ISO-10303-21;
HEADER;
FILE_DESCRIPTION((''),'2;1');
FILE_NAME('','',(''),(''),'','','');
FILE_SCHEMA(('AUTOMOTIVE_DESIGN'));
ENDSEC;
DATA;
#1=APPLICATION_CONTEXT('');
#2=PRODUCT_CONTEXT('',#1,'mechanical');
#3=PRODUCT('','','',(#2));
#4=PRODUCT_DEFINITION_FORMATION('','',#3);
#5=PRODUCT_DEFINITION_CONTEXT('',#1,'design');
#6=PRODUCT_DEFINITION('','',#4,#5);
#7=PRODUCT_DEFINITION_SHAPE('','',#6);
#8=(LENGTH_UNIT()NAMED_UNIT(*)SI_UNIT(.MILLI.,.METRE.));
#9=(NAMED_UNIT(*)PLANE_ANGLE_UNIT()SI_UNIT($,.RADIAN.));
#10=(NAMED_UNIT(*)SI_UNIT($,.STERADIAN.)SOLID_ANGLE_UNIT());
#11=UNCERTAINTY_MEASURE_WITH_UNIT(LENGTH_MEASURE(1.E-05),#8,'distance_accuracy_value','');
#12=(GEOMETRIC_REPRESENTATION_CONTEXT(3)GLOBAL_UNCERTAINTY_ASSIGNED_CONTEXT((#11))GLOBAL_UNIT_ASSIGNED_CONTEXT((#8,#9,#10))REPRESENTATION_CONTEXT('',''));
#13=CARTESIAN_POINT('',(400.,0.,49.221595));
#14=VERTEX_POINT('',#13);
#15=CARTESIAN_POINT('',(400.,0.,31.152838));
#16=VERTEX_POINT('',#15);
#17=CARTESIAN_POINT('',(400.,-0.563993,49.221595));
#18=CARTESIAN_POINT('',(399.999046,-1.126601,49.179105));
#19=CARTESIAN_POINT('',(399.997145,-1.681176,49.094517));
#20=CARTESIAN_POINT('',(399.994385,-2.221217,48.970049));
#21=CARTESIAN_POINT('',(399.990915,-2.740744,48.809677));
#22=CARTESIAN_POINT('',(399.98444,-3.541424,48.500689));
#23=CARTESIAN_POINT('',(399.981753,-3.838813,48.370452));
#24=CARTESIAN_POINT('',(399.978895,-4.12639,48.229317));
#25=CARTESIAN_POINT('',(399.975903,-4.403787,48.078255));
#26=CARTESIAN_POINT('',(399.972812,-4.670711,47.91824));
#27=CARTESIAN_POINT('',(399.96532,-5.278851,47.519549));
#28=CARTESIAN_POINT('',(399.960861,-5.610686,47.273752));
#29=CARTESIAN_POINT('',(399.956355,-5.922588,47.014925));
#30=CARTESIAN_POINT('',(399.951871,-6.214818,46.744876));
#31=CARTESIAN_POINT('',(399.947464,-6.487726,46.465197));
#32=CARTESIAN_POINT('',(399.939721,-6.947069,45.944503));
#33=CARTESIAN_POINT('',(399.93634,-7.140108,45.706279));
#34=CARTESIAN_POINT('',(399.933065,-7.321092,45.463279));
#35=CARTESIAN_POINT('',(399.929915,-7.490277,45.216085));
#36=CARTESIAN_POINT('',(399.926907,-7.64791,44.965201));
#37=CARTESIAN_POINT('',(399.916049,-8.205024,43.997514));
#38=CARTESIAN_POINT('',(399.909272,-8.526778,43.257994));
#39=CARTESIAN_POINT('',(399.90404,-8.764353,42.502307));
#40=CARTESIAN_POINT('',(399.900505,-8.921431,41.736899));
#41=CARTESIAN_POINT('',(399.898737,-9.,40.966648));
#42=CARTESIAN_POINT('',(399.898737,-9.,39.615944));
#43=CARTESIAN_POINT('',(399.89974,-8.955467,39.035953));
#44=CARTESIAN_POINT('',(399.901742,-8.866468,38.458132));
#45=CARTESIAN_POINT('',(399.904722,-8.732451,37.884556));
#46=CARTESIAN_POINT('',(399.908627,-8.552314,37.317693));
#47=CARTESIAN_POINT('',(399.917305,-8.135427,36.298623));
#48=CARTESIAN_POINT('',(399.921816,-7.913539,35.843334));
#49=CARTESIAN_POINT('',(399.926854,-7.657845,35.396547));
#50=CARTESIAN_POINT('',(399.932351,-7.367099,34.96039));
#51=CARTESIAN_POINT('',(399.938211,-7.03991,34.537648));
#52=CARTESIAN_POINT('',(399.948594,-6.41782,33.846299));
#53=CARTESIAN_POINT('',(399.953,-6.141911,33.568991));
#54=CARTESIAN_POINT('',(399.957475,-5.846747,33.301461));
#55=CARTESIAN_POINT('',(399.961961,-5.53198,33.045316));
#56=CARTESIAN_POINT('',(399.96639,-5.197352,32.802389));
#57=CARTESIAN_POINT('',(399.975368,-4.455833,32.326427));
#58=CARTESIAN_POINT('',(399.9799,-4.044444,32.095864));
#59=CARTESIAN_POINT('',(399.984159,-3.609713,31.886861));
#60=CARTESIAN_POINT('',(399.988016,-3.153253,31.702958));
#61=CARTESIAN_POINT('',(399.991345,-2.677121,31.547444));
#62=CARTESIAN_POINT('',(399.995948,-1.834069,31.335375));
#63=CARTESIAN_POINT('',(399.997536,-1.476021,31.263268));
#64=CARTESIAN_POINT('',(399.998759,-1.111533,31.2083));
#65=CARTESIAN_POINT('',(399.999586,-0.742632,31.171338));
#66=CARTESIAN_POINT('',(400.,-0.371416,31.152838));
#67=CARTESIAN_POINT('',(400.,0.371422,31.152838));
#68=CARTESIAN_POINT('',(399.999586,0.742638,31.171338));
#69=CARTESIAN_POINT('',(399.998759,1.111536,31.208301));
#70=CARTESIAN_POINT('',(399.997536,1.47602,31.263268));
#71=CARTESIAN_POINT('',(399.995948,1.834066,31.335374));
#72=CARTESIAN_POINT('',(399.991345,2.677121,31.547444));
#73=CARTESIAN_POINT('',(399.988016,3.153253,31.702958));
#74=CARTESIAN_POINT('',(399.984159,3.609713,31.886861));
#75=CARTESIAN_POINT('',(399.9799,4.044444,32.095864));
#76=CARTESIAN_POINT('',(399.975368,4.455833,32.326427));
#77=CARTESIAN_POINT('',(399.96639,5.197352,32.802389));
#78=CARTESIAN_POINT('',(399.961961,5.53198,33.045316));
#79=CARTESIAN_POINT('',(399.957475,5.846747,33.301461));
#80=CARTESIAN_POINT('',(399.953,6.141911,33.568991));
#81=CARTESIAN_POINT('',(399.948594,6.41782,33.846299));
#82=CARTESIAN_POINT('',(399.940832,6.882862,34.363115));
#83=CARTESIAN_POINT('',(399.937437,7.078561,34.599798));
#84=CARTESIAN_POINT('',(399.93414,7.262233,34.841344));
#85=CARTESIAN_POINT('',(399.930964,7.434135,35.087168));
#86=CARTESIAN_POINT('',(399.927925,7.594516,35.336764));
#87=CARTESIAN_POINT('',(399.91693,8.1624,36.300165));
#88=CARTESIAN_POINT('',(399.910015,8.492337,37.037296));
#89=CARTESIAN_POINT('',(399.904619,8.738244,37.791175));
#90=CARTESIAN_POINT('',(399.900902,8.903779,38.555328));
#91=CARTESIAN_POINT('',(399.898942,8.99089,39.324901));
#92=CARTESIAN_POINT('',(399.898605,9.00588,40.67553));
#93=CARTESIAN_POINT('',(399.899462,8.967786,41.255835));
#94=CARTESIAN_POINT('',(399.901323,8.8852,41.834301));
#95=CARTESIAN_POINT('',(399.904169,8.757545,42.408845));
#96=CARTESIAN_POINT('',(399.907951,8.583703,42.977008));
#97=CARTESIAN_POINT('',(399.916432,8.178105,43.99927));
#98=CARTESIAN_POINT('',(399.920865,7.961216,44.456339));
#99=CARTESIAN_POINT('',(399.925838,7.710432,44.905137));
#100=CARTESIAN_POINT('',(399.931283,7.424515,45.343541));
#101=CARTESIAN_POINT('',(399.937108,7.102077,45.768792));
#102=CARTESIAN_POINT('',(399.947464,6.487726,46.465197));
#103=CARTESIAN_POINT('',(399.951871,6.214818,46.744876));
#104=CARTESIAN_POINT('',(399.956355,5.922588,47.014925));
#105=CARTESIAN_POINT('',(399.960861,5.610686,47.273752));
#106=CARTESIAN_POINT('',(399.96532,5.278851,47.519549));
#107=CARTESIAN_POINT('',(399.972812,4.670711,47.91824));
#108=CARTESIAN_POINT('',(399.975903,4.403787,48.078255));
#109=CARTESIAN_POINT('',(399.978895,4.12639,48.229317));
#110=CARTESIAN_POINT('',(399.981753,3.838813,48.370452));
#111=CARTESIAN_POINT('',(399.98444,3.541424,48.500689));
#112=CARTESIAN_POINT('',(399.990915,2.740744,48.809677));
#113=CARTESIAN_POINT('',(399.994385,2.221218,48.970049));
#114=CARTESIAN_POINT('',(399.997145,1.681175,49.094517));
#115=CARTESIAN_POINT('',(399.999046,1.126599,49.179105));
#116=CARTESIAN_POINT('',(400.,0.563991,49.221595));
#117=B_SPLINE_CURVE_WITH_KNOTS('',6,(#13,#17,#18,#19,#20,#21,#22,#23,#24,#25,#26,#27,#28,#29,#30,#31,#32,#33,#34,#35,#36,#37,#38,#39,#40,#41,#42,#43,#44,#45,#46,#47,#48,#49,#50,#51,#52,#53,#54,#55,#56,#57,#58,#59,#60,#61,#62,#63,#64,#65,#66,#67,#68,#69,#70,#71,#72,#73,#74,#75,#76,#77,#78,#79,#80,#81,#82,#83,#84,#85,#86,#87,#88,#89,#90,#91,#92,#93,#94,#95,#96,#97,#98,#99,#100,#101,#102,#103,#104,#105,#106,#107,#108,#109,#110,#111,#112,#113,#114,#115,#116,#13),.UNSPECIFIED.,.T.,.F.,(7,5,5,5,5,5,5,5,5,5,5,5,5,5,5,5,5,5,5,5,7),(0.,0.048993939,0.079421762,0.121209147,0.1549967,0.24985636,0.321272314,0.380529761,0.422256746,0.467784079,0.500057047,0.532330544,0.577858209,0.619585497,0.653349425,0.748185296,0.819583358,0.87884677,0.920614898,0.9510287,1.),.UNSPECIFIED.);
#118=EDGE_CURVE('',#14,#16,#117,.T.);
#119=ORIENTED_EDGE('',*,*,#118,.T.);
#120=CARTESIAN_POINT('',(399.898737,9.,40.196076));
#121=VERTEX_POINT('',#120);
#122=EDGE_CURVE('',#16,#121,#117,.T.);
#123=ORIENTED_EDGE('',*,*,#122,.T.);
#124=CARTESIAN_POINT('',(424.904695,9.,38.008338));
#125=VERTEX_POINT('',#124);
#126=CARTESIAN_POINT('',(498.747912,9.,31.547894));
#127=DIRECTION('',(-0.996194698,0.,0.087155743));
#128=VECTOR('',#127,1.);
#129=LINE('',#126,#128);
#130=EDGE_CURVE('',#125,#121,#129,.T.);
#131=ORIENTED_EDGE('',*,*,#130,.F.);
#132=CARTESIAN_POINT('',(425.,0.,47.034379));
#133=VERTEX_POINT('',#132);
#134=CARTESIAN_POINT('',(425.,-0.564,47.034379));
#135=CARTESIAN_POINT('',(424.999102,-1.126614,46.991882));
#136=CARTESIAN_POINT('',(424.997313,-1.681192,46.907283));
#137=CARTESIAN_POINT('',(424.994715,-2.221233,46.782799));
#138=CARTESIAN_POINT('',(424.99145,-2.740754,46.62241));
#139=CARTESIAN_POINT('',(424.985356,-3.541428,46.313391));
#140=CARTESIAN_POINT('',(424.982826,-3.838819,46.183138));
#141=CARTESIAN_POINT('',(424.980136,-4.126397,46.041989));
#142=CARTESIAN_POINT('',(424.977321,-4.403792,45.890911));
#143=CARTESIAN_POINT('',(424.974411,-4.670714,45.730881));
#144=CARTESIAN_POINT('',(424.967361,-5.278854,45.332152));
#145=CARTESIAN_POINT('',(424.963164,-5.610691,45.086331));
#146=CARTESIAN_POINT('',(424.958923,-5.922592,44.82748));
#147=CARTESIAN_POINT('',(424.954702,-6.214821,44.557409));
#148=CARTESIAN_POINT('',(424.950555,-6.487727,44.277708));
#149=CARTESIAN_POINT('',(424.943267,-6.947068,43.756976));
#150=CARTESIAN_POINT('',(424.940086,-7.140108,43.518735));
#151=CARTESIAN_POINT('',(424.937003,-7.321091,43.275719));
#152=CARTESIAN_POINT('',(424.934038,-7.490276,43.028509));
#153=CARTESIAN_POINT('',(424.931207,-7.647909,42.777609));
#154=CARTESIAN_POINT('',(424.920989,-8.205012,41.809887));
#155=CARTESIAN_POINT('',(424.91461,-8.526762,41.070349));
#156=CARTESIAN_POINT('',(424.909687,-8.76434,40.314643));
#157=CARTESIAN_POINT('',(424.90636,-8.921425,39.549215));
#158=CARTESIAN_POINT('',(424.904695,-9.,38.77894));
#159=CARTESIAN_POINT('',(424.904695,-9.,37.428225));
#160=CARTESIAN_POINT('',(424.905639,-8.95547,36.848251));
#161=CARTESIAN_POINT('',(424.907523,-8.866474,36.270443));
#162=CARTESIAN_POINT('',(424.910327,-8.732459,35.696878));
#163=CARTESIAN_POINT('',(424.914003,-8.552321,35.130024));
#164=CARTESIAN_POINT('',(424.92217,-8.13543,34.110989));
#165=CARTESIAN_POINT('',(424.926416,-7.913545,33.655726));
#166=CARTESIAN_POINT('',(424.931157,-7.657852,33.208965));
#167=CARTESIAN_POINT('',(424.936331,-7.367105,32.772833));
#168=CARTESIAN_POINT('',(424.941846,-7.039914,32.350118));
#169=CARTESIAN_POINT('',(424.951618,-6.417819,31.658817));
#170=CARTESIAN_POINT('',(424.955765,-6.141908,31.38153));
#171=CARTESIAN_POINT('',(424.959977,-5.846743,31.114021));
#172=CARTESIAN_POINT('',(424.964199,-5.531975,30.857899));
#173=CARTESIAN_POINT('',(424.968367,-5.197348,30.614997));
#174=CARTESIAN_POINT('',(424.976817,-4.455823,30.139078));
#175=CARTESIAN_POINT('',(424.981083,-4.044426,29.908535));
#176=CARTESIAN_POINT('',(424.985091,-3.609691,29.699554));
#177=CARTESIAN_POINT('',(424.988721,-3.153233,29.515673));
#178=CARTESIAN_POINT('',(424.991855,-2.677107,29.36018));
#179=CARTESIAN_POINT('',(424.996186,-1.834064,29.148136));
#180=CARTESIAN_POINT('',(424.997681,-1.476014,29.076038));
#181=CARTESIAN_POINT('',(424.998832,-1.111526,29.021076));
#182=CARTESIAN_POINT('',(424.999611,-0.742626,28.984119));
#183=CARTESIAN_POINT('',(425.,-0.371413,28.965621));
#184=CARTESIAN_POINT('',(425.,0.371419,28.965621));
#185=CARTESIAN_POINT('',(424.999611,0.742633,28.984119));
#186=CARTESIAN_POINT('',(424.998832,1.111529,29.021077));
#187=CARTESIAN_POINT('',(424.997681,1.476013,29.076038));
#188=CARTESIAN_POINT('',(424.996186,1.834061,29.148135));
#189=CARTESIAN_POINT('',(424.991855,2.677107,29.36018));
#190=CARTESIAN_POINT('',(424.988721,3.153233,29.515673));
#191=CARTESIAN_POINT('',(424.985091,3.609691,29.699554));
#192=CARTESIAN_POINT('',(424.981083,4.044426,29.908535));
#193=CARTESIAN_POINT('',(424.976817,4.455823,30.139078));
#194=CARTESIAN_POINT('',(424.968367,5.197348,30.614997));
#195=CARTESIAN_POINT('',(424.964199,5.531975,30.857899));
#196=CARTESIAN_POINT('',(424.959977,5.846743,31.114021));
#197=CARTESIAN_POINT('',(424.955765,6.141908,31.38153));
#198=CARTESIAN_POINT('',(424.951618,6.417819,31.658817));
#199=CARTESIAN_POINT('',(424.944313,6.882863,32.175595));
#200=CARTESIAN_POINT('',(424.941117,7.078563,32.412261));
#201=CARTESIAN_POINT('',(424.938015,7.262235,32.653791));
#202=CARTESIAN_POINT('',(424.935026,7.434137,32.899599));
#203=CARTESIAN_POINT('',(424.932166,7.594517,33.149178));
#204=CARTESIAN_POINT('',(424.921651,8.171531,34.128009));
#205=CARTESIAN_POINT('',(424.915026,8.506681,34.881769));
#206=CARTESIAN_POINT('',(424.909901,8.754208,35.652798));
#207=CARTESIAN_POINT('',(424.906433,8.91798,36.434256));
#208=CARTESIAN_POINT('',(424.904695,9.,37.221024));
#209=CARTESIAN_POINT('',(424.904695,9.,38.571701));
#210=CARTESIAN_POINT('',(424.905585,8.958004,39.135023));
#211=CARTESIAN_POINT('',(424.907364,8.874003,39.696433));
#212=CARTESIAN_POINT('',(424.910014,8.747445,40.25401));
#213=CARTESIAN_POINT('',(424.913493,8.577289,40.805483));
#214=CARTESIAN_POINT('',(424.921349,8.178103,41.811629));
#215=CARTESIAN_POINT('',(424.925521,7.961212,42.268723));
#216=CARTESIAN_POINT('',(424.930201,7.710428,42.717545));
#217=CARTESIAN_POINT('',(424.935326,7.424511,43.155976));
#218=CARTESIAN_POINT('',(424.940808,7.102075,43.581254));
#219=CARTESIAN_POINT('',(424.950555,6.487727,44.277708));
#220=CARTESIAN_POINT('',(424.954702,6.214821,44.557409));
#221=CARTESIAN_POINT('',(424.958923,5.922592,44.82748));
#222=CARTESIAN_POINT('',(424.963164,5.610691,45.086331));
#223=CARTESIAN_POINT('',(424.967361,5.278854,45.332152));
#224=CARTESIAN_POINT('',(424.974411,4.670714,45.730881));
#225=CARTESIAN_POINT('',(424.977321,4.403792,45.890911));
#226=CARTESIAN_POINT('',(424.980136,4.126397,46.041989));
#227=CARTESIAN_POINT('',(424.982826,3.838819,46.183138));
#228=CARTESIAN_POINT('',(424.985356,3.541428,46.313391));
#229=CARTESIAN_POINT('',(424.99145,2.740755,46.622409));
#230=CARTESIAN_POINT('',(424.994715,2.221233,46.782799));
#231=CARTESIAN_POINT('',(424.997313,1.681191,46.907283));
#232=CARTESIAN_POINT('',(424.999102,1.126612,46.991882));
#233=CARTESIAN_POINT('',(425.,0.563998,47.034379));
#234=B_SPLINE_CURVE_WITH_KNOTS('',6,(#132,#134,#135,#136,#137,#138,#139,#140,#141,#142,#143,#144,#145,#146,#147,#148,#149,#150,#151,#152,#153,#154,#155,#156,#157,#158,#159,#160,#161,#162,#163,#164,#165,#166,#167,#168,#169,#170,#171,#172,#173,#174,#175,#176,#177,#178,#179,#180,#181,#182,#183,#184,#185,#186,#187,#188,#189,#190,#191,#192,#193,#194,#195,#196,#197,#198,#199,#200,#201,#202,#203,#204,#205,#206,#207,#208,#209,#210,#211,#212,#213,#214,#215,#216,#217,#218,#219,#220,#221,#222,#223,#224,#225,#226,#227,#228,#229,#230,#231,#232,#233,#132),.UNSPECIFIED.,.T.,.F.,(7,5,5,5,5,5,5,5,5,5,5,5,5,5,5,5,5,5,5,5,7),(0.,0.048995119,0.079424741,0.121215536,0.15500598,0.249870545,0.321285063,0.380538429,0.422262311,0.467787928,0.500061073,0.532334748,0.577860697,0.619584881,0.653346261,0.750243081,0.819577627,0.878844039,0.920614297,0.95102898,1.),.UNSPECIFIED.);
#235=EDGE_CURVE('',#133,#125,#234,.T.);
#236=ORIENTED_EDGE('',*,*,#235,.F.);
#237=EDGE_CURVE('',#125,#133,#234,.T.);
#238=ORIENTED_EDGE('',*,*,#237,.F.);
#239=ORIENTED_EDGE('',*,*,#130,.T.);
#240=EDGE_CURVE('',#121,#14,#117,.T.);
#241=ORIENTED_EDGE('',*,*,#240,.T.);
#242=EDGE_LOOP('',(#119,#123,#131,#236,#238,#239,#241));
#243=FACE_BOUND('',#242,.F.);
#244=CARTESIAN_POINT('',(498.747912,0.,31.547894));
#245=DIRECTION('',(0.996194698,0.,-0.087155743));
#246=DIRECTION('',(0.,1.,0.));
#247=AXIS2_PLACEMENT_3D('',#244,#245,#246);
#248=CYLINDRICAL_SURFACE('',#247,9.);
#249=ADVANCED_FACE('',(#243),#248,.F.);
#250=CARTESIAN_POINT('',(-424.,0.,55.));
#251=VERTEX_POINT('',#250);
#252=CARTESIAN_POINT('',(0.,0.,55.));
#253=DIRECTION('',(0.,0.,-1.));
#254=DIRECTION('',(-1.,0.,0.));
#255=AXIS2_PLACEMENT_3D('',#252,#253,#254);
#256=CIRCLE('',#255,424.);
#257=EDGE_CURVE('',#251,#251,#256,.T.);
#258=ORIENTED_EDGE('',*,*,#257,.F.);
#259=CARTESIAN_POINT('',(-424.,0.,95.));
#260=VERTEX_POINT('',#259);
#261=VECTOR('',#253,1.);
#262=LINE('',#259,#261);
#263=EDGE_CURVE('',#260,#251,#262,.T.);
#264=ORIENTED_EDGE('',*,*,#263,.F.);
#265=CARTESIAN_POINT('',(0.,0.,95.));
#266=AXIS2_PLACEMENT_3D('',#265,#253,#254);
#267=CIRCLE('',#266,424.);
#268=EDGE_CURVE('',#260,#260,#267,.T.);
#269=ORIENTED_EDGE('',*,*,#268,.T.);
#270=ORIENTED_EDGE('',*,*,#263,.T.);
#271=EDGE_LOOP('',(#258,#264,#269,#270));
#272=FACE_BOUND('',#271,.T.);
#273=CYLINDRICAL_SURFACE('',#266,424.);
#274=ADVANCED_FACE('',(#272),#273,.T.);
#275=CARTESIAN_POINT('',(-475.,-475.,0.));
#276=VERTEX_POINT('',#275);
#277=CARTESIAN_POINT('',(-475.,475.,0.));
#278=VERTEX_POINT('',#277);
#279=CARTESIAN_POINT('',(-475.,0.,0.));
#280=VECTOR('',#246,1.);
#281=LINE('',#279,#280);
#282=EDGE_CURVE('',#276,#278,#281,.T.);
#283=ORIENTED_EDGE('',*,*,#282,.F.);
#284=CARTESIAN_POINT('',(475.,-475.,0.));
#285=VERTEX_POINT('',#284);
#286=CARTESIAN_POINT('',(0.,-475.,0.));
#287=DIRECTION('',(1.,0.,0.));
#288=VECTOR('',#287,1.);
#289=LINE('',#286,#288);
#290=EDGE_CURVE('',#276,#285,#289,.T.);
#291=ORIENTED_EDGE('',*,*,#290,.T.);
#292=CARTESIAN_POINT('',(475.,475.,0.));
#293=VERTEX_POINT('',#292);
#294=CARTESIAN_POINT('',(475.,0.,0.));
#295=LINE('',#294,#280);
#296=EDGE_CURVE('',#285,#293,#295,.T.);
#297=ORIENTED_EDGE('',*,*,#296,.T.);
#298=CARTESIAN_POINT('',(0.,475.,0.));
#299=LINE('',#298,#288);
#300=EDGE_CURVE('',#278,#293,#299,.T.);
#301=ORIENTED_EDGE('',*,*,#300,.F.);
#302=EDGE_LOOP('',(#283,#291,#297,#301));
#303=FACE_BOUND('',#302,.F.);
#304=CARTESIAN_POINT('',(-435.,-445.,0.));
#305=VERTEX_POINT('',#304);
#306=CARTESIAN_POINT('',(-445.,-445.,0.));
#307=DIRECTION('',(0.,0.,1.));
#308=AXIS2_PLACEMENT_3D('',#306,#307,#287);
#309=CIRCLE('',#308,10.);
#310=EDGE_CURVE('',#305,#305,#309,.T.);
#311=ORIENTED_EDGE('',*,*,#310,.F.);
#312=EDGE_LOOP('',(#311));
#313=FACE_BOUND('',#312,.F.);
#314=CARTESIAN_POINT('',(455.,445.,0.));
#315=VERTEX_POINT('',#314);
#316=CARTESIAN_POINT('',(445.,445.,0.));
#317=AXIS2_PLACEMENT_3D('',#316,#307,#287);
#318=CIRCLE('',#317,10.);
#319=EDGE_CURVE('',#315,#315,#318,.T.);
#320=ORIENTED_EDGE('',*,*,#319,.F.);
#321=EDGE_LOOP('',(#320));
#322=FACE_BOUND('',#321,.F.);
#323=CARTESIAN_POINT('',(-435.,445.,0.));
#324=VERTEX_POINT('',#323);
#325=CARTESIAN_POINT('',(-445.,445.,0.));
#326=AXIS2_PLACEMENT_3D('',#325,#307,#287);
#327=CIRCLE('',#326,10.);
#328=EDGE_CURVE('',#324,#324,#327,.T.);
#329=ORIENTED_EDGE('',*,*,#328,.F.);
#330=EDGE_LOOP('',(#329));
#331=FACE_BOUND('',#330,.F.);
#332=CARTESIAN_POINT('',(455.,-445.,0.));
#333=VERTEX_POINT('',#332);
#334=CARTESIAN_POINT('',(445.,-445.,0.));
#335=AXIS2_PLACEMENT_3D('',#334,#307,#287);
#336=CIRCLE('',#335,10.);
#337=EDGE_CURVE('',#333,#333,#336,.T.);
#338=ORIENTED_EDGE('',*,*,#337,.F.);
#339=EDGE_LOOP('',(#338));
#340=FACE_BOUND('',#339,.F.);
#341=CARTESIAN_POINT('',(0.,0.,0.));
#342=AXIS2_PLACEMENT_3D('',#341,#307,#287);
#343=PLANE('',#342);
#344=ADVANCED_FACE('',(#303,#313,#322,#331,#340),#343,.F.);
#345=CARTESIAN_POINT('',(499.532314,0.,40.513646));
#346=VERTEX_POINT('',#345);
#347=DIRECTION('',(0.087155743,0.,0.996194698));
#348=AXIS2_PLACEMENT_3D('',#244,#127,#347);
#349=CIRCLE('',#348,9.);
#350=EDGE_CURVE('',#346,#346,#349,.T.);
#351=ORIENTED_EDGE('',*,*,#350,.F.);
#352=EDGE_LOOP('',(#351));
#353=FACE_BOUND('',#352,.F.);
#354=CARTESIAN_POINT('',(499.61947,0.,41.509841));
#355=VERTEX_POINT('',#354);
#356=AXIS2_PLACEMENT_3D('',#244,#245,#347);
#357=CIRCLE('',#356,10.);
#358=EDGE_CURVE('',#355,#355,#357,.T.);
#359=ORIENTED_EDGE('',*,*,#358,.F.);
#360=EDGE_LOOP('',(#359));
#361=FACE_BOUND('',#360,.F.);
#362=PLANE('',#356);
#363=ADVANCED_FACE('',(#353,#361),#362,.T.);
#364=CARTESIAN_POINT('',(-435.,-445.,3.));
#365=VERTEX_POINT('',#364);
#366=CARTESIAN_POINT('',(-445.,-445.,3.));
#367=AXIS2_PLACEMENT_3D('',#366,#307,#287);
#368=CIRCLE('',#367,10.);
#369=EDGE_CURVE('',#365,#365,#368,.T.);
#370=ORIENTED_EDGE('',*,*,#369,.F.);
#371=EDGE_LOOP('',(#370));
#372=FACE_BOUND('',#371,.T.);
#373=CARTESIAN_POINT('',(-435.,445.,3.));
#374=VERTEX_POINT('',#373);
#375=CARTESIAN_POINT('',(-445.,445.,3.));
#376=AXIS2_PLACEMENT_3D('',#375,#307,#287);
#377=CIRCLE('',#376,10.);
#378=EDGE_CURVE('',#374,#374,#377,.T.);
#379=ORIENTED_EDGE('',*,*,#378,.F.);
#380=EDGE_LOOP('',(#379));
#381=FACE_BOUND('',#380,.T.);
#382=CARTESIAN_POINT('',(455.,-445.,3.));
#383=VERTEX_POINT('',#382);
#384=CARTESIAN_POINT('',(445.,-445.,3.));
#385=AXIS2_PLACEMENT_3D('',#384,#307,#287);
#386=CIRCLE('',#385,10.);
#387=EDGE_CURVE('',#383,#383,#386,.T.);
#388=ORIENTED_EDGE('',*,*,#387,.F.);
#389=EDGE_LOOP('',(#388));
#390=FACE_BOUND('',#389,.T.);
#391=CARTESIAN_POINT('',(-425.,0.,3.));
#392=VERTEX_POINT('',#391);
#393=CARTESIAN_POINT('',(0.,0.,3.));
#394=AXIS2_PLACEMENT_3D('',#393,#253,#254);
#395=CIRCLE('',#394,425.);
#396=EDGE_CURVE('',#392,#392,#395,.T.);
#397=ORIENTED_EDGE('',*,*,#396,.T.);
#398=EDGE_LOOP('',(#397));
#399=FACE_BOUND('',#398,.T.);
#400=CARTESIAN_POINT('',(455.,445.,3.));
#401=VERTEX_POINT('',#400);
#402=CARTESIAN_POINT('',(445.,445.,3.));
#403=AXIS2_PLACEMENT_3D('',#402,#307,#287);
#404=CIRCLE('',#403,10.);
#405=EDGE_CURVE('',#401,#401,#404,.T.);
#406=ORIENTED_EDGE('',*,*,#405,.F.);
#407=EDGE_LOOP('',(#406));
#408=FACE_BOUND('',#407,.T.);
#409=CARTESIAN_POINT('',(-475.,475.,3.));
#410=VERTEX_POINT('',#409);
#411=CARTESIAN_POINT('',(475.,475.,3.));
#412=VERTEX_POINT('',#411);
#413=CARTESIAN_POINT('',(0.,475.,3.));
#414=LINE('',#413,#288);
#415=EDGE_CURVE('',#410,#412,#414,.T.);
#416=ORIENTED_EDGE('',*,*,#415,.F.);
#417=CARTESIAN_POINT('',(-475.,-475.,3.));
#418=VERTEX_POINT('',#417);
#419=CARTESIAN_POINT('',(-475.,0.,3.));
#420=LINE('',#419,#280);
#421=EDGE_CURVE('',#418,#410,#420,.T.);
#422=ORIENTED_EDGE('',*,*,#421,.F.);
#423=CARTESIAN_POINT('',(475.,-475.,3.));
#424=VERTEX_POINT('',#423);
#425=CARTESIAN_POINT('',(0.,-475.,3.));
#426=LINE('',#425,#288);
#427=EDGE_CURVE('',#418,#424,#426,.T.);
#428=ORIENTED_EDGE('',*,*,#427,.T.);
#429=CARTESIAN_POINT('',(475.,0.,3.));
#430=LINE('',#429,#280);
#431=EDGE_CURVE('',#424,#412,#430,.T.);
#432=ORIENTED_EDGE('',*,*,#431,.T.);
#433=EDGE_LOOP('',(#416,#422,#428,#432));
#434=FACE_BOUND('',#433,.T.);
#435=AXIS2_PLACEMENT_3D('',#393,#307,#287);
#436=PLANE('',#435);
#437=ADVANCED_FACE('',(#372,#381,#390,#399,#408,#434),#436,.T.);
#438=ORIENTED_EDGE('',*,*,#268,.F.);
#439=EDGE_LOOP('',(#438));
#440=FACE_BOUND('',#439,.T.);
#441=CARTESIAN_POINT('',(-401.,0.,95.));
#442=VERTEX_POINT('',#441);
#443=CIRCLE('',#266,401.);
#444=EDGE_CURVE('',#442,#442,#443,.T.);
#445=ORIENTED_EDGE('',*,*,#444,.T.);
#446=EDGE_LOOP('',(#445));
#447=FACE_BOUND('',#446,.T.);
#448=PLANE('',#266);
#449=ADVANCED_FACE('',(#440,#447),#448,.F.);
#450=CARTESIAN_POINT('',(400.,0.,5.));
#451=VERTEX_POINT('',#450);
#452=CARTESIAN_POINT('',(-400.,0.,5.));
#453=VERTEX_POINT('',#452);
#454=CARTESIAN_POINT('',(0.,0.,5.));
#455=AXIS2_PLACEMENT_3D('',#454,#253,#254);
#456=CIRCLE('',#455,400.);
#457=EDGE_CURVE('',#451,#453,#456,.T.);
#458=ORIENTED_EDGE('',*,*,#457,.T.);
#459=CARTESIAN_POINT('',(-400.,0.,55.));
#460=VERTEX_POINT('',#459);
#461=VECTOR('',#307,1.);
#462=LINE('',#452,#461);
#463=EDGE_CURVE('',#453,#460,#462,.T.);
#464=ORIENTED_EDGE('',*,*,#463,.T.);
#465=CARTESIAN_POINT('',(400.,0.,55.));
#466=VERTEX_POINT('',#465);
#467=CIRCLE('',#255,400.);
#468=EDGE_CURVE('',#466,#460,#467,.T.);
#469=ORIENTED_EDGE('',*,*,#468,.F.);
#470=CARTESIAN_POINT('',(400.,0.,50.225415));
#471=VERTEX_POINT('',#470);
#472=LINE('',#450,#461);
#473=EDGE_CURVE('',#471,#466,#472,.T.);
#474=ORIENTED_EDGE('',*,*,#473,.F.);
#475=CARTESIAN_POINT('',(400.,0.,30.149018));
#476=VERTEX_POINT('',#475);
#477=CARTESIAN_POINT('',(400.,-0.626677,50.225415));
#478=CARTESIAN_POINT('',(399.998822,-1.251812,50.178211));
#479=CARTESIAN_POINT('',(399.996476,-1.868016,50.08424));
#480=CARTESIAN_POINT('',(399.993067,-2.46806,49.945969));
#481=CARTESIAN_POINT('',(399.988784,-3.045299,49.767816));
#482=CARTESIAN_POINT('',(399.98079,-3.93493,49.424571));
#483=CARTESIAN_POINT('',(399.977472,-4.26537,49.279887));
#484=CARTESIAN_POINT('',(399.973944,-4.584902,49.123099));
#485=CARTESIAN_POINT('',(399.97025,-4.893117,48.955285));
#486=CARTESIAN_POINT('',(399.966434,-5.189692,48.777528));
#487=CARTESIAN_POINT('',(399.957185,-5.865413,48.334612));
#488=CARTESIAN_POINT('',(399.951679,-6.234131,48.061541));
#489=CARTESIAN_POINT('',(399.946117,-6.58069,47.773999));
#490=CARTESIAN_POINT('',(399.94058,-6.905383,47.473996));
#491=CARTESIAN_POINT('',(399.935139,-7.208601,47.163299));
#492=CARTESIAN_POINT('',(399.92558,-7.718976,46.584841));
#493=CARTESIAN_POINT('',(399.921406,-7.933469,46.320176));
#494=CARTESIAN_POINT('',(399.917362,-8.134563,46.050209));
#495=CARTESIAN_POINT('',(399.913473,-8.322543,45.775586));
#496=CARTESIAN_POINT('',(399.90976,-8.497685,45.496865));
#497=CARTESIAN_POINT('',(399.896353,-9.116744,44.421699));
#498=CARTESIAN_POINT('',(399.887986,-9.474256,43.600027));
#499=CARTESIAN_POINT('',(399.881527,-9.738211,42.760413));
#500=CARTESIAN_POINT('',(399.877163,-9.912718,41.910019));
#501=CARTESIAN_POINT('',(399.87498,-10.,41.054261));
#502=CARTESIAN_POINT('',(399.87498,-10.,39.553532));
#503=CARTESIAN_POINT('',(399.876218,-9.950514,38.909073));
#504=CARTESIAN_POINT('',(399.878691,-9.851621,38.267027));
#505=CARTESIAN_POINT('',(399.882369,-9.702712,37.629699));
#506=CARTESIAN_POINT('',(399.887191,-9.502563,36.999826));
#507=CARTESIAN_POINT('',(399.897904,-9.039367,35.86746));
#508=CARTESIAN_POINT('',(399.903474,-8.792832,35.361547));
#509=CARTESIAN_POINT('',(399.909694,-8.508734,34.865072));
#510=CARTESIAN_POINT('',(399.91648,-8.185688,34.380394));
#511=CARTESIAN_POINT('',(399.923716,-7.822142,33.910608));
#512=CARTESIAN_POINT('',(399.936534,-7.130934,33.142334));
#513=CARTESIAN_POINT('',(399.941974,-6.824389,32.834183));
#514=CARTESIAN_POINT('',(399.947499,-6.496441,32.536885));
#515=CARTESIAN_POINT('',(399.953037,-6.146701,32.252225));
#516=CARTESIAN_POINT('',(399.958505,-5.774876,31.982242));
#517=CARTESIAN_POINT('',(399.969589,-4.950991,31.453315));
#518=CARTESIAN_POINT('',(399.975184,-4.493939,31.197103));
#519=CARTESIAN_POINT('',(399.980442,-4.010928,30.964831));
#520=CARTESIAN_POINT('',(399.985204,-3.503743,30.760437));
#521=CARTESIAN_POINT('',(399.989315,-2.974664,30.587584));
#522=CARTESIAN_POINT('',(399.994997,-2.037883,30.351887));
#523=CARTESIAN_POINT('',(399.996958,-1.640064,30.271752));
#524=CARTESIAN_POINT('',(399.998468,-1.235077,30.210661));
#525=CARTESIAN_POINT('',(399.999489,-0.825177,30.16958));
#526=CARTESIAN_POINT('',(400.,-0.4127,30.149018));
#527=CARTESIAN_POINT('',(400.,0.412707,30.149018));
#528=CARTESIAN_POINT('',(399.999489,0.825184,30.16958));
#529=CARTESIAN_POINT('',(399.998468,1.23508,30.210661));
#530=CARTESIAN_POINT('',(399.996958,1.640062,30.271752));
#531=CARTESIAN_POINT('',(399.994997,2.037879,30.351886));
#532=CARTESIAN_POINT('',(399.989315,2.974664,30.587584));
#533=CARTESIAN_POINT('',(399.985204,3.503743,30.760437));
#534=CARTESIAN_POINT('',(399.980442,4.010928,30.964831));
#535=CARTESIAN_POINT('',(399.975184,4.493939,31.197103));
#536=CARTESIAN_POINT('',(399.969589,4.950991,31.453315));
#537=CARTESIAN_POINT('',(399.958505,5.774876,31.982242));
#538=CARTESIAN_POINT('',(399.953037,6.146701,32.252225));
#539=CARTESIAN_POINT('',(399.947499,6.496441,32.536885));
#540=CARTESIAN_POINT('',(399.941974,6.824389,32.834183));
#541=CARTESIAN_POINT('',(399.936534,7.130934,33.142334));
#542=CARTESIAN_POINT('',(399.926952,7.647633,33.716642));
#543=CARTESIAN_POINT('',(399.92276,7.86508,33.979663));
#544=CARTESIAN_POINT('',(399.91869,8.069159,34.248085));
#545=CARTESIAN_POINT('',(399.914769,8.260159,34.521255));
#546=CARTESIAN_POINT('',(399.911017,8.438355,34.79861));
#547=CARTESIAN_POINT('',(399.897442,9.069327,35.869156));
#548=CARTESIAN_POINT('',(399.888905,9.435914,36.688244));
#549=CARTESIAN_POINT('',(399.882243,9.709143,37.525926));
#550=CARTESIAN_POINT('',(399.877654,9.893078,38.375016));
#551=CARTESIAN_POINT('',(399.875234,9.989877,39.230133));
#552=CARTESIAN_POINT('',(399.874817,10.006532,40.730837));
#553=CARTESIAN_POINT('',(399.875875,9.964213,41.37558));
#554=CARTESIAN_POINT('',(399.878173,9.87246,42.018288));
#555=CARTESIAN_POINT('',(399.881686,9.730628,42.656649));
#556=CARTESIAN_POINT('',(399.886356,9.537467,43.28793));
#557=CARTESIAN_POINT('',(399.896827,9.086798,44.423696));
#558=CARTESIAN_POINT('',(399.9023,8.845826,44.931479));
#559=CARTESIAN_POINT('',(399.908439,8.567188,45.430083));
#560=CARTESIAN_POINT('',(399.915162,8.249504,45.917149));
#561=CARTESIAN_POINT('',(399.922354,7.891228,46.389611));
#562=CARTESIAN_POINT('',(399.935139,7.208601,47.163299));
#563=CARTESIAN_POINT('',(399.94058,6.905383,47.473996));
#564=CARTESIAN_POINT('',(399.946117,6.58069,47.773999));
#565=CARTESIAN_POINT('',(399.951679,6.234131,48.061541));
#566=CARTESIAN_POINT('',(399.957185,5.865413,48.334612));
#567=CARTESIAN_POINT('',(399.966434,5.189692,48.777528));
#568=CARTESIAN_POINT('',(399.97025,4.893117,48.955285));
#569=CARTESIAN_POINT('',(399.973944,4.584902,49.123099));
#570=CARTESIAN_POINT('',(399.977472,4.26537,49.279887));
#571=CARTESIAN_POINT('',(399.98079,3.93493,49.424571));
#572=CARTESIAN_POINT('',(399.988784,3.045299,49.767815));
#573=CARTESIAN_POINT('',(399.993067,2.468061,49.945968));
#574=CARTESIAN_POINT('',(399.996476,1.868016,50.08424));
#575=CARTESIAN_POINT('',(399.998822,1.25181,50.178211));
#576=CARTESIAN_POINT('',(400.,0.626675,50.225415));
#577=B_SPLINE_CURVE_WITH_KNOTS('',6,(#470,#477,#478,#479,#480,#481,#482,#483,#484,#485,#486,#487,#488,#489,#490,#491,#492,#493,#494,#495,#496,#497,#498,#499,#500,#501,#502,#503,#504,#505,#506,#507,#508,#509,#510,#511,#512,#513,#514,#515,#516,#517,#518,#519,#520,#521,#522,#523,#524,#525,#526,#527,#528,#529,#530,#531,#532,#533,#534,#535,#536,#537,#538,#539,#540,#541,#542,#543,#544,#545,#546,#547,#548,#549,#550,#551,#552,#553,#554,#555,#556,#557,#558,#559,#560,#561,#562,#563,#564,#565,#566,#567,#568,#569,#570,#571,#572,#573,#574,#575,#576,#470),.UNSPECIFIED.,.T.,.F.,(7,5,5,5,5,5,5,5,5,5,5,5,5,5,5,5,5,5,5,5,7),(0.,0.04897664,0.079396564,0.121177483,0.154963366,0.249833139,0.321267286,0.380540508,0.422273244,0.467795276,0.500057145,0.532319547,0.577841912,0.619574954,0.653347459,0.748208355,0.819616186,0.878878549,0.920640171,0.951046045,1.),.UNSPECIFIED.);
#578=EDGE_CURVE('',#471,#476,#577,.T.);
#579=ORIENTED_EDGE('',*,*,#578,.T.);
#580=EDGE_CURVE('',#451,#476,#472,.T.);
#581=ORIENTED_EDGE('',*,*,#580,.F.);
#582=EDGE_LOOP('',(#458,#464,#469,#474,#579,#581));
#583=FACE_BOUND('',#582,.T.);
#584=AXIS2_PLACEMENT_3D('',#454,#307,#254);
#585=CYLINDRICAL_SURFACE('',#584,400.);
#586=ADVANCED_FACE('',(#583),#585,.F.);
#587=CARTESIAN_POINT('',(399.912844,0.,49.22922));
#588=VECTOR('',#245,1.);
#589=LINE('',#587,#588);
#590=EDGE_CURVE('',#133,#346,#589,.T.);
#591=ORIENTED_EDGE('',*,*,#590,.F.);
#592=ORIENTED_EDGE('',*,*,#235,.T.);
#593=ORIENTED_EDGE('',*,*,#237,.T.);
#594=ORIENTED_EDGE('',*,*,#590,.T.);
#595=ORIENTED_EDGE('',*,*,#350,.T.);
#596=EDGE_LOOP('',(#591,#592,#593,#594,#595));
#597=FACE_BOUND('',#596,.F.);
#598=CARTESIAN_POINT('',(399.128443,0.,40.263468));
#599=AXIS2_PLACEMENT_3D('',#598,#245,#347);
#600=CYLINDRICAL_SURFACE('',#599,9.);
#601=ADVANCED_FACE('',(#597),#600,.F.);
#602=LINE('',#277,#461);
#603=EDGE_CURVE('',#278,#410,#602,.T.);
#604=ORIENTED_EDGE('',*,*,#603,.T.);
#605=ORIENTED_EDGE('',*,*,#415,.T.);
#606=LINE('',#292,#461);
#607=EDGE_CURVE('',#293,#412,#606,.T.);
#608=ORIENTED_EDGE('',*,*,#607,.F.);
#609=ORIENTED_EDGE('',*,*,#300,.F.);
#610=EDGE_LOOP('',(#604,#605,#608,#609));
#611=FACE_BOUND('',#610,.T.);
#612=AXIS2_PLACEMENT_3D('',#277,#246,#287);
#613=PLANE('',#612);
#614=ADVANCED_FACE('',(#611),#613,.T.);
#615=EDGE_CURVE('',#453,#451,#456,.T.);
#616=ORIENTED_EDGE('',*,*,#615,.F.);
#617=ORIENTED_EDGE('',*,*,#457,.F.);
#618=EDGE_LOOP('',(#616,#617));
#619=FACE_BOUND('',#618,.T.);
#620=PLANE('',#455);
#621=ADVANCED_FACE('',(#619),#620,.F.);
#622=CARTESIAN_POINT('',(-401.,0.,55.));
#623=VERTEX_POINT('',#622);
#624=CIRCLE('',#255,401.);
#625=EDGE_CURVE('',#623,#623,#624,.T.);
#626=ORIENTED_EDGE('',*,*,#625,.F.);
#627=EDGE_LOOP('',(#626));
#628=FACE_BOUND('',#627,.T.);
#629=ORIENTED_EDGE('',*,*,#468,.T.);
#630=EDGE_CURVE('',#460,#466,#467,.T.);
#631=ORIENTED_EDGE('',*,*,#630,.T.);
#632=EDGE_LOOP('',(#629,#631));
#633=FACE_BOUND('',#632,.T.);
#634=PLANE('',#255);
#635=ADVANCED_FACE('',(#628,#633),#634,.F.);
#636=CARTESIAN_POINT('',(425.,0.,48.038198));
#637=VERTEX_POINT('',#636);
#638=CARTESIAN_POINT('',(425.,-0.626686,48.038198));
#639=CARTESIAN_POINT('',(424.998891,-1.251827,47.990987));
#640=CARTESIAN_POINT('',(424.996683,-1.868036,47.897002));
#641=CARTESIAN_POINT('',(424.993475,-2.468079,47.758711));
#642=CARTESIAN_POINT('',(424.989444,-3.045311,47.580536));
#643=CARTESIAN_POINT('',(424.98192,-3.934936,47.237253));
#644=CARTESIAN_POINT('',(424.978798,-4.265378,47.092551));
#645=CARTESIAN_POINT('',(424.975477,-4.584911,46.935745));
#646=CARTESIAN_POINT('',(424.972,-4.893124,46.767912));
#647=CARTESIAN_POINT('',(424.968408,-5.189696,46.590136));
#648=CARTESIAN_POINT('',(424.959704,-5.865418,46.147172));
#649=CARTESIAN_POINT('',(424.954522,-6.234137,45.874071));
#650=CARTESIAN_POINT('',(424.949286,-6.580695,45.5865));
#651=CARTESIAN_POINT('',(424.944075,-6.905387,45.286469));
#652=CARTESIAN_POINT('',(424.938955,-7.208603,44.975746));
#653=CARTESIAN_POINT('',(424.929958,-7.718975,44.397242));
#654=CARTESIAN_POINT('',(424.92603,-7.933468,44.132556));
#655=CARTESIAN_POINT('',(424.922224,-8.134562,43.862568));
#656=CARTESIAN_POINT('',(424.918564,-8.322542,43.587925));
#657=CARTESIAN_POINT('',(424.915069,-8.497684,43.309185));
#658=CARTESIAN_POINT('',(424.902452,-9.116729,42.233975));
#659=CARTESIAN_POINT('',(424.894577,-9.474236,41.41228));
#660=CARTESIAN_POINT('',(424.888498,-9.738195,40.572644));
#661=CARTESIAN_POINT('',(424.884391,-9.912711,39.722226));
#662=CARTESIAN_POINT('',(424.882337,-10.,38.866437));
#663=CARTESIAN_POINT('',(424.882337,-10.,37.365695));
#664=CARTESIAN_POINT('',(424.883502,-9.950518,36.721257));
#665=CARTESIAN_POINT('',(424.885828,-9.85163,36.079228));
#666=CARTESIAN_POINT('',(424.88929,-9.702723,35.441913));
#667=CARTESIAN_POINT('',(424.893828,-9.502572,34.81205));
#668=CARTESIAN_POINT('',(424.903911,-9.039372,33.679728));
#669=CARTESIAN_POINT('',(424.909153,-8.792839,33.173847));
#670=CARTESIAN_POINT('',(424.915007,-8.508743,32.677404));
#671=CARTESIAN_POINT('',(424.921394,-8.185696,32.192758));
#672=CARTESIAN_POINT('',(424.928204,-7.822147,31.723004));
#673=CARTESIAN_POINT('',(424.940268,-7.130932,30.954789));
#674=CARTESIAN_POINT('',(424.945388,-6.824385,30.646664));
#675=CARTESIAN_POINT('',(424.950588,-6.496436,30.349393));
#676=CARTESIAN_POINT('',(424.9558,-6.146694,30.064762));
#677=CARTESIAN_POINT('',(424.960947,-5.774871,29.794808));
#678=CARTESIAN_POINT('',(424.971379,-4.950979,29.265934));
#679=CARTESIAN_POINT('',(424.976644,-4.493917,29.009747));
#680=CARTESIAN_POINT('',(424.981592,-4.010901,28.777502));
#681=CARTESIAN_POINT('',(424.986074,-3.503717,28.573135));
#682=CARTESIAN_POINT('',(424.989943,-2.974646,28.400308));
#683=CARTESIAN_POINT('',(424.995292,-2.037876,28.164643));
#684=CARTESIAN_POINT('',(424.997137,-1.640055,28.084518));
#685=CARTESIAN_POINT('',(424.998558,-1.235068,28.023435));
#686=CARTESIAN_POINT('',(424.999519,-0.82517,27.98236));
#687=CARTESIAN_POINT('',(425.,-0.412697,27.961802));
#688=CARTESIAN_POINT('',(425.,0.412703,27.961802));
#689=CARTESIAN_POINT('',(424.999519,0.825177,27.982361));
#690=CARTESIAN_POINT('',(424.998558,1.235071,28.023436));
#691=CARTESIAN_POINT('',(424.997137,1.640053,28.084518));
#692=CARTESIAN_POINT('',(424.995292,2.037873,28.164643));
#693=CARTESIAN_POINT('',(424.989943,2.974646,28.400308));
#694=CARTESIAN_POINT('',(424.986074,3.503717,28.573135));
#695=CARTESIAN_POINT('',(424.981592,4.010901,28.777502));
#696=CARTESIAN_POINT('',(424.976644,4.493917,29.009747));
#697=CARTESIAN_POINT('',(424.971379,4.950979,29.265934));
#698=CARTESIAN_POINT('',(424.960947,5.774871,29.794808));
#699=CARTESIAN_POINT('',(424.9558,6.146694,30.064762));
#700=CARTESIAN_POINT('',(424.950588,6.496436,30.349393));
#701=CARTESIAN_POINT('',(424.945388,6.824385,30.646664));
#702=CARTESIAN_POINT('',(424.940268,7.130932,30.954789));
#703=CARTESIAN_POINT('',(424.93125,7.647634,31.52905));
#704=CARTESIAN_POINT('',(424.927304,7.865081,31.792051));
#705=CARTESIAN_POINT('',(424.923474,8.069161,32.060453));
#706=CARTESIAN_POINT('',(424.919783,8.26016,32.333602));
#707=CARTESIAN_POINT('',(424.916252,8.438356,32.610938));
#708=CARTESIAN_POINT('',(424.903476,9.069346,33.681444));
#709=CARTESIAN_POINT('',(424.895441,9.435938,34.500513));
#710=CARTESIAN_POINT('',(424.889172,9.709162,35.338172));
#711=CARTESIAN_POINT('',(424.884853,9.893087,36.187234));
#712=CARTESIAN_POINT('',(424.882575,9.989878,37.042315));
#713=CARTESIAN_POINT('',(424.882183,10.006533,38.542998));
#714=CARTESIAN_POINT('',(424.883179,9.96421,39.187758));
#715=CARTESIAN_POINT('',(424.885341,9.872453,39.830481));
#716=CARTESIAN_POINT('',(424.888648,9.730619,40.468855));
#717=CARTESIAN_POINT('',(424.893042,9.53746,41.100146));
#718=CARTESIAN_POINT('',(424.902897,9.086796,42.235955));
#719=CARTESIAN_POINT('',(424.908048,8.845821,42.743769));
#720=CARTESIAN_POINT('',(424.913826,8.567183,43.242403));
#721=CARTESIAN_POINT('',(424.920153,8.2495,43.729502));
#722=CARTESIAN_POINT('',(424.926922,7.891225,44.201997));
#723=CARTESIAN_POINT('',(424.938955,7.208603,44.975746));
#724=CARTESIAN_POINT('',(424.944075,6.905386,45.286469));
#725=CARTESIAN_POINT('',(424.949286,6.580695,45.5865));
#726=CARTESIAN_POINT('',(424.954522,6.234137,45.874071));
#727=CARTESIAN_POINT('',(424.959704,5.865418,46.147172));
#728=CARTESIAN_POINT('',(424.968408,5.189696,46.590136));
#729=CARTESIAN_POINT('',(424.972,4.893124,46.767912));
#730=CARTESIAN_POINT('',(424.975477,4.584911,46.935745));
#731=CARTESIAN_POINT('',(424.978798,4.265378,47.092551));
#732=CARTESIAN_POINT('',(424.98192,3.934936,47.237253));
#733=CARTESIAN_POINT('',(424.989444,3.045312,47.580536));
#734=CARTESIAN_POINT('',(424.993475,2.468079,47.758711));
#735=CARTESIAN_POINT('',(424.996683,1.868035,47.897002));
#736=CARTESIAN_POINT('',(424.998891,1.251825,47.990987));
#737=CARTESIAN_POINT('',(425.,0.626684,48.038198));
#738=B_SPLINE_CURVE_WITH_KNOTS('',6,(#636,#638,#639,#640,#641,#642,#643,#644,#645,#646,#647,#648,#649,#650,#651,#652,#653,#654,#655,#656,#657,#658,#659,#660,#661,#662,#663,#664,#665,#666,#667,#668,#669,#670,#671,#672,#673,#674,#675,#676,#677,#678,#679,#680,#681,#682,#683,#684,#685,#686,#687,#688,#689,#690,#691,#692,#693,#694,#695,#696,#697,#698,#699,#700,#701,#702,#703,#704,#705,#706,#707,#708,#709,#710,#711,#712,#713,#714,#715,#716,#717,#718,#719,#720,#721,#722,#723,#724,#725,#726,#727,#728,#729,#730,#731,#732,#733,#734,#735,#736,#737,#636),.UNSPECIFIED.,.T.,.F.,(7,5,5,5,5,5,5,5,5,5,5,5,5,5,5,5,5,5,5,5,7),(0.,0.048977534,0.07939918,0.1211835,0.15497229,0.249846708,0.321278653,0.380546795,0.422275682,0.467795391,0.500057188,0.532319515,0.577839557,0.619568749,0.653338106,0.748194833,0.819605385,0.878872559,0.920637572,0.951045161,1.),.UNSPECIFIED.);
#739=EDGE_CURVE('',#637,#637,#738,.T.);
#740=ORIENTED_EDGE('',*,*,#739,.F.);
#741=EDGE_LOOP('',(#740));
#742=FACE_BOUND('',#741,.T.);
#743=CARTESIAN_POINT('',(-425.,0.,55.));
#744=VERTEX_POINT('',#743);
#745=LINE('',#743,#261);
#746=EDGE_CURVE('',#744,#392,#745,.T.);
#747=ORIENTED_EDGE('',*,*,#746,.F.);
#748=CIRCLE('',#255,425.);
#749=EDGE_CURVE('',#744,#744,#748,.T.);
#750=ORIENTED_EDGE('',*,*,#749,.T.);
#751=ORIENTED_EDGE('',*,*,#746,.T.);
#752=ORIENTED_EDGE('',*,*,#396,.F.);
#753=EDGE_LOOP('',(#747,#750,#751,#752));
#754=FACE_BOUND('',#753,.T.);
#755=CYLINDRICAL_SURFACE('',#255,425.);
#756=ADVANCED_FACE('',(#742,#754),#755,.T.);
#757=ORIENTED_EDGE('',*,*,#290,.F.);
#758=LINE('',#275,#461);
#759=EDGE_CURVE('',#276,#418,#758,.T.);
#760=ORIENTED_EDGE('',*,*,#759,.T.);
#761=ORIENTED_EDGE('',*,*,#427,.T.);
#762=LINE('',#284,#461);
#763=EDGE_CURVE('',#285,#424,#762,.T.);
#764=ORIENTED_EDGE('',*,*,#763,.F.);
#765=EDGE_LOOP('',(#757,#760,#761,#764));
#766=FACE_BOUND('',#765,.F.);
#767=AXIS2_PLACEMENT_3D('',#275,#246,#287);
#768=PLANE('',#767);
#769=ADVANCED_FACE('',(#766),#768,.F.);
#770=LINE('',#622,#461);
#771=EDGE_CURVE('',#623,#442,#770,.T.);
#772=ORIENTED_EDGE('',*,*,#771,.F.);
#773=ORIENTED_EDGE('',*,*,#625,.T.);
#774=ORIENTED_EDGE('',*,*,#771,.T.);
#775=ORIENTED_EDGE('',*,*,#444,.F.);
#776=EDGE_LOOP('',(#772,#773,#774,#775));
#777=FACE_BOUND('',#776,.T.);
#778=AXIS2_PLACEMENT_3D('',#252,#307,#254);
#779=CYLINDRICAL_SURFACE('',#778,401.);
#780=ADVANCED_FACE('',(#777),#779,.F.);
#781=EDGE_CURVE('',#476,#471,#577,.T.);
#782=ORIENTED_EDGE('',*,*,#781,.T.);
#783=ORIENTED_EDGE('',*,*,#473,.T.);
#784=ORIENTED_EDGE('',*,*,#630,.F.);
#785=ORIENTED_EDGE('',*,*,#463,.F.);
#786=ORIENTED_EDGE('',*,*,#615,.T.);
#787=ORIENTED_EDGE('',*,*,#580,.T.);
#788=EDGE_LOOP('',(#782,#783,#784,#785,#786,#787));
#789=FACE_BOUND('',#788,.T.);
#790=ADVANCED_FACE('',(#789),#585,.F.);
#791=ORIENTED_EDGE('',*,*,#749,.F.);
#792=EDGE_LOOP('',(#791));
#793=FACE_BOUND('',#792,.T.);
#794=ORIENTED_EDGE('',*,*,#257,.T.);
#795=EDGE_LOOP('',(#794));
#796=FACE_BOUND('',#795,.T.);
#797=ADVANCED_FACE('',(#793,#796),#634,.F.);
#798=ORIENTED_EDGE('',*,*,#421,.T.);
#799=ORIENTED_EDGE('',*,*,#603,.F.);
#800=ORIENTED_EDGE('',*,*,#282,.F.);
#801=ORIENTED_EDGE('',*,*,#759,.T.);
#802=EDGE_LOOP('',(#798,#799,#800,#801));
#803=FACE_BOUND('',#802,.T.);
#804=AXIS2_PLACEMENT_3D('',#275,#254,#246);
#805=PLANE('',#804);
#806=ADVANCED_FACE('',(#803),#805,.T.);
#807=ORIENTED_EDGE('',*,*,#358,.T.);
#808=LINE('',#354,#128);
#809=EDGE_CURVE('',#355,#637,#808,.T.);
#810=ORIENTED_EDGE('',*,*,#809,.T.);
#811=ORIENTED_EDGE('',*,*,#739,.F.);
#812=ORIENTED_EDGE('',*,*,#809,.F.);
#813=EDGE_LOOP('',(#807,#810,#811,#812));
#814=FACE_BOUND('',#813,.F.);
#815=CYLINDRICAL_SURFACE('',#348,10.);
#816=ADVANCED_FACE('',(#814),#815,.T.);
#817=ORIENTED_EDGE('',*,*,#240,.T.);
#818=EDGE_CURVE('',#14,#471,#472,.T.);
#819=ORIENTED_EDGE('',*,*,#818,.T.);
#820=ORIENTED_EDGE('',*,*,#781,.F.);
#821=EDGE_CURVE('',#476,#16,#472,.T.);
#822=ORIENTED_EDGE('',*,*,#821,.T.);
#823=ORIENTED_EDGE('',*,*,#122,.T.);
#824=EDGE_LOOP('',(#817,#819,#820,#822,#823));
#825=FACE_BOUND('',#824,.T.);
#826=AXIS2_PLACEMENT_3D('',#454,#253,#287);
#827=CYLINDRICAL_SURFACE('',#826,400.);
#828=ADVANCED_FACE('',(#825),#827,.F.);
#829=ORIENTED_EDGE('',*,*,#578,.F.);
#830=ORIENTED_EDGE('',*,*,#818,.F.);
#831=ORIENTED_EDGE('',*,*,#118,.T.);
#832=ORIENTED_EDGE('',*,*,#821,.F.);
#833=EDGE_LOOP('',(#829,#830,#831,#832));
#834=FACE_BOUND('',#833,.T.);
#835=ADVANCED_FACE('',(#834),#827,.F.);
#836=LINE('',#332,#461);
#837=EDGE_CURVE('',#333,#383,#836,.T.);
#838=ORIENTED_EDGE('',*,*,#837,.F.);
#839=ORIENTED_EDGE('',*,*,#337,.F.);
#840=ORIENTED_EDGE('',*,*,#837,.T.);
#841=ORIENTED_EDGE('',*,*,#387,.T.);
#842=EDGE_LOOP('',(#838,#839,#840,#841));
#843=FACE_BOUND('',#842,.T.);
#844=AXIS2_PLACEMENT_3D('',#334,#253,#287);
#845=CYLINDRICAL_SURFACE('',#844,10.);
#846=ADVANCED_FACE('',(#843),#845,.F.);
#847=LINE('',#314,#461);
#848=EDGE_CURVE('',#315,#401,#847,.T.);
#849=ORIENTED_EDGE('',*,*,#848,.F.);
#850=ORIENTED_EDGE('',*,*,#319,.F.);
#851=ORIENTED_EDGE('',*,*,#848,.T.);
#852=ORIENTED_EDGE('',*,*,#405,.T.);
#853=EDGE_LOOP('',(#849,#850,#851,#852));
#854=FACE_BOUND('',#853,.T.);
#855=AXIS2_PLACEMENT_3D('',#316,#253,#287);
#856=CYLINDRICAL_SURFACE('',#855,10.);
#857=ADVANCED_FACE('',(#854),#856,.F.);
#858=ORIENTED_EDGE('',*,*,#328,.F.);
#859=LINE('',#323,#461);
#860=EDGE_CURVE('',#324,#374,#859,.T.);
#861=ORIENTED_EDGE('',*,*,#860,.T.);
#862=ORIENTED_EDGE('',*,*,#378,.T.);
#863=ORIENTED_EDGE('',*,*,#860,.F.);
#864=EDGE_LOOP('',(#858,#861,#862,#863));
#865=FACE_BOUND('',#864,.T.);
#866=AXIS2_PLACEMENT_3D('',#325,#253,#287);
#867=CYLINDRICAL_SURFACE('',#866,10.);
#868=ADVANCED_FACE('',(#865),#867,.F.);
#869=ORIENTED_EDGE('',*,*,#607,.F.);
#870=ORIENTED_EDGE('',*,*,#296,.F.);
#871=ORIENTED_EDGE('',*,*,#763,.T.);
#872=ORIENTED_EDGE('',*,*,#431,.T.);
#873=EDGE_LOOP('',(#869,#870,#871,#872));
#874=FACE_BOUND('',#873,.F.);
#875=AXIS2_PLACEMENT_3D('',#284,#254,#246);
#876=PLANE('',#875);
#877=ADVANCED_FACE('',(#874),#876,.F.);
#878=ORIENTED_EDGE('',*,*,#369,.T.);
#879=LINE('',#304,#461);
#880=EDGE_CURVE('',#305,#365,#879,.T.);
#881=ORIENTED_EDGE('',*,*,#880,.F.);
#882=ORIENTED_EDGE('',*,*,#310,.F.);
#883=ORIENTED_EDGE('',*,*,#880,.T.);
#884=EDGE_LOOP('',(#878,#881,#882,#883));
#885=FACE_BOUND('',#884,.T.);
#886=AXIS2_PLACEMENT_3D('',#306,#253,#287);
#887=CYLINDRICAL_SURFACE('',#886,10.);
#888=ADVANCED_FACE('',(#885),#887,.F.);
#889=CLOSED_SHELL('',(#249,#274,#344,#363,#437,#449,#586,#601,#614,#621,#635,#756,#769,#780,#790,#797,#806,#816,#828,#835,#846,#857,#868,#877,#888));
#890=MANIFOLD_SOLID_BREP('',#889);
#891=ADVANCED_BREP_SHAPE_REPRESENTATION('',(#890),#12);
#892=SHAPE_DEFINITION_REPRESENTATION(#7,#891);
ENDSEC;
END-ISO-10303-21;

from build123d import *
from build123d import SkipClean  # not in build123d's __all__

# Parameters (mm, degrees)
F0_W     = 10
F0_H     = 3
F2_W     = 950
F2_H     = 950
F2_R     = 10
F3_DEPTH = 3
F6_R     = 9
F7_DEPTH = 120
F8_R     = 400
F9_DEPTH = 200


with BuildPart() as f1:
    # F0 (on Front) → F1 (revolve)
    with BuildSketch(Plane.XZ):
        Polygon((-425, 5), (-400, 5), (-400, 55), (-401, 55), (-401, 95), (-424, 95), (-424, 55), (-425, 55), align=None)
        Polygon((-10, 5), (-400, 5), (-425, 5), (-425, 2), (-10, 2), align=None)
        with Locations((-5, 3.5)):
            Rectangle(F0_W, F0_H)
    revolve(axis=Axis((0, 0, 187.9212413023), (0, 0, -1)))

    # F2 (on Top) → F3 (join)
    with BuildSketch(Plane.XY):
        Rectangle(F2_W, F2_H)
        with Locations((-445, -445)):
            Circle(F2_R, mode=Mode.SUBTRACT)
        with Locations((445, -445)):
            Circle(F2_R, mode=Mode.SUBTRACT)
        with Locations((-445, 445)):
            Circle(F2_R, mode=Mode.SUBTRACT)
        with Locations((445, 445)):
            Circle(F2_R, mode=Mode.SUBTRACT)
    extrude(amount=F3_DEPTH)

    # F4 (on Front) → F5 (revolve)
    with BuildSketch(Plane.XZ):
        Polygon((499.6194698092, 41.5098406888), (400, 50.2254149636), (399.9128442573, 49.2292202655), (499.5323140664, 40.5136459907), align=None)
    revolve(axis=Axis((512.7442754949, 0, 30.3233706049), (0.9961946981, 0, -0.0871557427)))

    # F6 (on face) → F7 (cut)
    with BuildSketch(Plane(origin=(492.2202445211, 0, -43.0636913536), x_dir=(0, 1, 0), z_dir=(0.9961946981, 0, -0.0871557427))):
        with Locations((0, 74.8965891952)):
            Circle(F6_R)
    extrude(amount=-F7_DEPTH, mode=Mode.SUBTRACT)

    # F8 (on face) → F9 (cut)
    with BuildSketch(Plane.XY.offset(5)):
        Circle(F8_R)
    with SkipClean():  # cleaning this boolean's faces spoils the solid; the shape is the same uncleaned
        extrude(amount=F9_DEPTH, mode=Mode.SUBTRACT)


solid = f1.part
